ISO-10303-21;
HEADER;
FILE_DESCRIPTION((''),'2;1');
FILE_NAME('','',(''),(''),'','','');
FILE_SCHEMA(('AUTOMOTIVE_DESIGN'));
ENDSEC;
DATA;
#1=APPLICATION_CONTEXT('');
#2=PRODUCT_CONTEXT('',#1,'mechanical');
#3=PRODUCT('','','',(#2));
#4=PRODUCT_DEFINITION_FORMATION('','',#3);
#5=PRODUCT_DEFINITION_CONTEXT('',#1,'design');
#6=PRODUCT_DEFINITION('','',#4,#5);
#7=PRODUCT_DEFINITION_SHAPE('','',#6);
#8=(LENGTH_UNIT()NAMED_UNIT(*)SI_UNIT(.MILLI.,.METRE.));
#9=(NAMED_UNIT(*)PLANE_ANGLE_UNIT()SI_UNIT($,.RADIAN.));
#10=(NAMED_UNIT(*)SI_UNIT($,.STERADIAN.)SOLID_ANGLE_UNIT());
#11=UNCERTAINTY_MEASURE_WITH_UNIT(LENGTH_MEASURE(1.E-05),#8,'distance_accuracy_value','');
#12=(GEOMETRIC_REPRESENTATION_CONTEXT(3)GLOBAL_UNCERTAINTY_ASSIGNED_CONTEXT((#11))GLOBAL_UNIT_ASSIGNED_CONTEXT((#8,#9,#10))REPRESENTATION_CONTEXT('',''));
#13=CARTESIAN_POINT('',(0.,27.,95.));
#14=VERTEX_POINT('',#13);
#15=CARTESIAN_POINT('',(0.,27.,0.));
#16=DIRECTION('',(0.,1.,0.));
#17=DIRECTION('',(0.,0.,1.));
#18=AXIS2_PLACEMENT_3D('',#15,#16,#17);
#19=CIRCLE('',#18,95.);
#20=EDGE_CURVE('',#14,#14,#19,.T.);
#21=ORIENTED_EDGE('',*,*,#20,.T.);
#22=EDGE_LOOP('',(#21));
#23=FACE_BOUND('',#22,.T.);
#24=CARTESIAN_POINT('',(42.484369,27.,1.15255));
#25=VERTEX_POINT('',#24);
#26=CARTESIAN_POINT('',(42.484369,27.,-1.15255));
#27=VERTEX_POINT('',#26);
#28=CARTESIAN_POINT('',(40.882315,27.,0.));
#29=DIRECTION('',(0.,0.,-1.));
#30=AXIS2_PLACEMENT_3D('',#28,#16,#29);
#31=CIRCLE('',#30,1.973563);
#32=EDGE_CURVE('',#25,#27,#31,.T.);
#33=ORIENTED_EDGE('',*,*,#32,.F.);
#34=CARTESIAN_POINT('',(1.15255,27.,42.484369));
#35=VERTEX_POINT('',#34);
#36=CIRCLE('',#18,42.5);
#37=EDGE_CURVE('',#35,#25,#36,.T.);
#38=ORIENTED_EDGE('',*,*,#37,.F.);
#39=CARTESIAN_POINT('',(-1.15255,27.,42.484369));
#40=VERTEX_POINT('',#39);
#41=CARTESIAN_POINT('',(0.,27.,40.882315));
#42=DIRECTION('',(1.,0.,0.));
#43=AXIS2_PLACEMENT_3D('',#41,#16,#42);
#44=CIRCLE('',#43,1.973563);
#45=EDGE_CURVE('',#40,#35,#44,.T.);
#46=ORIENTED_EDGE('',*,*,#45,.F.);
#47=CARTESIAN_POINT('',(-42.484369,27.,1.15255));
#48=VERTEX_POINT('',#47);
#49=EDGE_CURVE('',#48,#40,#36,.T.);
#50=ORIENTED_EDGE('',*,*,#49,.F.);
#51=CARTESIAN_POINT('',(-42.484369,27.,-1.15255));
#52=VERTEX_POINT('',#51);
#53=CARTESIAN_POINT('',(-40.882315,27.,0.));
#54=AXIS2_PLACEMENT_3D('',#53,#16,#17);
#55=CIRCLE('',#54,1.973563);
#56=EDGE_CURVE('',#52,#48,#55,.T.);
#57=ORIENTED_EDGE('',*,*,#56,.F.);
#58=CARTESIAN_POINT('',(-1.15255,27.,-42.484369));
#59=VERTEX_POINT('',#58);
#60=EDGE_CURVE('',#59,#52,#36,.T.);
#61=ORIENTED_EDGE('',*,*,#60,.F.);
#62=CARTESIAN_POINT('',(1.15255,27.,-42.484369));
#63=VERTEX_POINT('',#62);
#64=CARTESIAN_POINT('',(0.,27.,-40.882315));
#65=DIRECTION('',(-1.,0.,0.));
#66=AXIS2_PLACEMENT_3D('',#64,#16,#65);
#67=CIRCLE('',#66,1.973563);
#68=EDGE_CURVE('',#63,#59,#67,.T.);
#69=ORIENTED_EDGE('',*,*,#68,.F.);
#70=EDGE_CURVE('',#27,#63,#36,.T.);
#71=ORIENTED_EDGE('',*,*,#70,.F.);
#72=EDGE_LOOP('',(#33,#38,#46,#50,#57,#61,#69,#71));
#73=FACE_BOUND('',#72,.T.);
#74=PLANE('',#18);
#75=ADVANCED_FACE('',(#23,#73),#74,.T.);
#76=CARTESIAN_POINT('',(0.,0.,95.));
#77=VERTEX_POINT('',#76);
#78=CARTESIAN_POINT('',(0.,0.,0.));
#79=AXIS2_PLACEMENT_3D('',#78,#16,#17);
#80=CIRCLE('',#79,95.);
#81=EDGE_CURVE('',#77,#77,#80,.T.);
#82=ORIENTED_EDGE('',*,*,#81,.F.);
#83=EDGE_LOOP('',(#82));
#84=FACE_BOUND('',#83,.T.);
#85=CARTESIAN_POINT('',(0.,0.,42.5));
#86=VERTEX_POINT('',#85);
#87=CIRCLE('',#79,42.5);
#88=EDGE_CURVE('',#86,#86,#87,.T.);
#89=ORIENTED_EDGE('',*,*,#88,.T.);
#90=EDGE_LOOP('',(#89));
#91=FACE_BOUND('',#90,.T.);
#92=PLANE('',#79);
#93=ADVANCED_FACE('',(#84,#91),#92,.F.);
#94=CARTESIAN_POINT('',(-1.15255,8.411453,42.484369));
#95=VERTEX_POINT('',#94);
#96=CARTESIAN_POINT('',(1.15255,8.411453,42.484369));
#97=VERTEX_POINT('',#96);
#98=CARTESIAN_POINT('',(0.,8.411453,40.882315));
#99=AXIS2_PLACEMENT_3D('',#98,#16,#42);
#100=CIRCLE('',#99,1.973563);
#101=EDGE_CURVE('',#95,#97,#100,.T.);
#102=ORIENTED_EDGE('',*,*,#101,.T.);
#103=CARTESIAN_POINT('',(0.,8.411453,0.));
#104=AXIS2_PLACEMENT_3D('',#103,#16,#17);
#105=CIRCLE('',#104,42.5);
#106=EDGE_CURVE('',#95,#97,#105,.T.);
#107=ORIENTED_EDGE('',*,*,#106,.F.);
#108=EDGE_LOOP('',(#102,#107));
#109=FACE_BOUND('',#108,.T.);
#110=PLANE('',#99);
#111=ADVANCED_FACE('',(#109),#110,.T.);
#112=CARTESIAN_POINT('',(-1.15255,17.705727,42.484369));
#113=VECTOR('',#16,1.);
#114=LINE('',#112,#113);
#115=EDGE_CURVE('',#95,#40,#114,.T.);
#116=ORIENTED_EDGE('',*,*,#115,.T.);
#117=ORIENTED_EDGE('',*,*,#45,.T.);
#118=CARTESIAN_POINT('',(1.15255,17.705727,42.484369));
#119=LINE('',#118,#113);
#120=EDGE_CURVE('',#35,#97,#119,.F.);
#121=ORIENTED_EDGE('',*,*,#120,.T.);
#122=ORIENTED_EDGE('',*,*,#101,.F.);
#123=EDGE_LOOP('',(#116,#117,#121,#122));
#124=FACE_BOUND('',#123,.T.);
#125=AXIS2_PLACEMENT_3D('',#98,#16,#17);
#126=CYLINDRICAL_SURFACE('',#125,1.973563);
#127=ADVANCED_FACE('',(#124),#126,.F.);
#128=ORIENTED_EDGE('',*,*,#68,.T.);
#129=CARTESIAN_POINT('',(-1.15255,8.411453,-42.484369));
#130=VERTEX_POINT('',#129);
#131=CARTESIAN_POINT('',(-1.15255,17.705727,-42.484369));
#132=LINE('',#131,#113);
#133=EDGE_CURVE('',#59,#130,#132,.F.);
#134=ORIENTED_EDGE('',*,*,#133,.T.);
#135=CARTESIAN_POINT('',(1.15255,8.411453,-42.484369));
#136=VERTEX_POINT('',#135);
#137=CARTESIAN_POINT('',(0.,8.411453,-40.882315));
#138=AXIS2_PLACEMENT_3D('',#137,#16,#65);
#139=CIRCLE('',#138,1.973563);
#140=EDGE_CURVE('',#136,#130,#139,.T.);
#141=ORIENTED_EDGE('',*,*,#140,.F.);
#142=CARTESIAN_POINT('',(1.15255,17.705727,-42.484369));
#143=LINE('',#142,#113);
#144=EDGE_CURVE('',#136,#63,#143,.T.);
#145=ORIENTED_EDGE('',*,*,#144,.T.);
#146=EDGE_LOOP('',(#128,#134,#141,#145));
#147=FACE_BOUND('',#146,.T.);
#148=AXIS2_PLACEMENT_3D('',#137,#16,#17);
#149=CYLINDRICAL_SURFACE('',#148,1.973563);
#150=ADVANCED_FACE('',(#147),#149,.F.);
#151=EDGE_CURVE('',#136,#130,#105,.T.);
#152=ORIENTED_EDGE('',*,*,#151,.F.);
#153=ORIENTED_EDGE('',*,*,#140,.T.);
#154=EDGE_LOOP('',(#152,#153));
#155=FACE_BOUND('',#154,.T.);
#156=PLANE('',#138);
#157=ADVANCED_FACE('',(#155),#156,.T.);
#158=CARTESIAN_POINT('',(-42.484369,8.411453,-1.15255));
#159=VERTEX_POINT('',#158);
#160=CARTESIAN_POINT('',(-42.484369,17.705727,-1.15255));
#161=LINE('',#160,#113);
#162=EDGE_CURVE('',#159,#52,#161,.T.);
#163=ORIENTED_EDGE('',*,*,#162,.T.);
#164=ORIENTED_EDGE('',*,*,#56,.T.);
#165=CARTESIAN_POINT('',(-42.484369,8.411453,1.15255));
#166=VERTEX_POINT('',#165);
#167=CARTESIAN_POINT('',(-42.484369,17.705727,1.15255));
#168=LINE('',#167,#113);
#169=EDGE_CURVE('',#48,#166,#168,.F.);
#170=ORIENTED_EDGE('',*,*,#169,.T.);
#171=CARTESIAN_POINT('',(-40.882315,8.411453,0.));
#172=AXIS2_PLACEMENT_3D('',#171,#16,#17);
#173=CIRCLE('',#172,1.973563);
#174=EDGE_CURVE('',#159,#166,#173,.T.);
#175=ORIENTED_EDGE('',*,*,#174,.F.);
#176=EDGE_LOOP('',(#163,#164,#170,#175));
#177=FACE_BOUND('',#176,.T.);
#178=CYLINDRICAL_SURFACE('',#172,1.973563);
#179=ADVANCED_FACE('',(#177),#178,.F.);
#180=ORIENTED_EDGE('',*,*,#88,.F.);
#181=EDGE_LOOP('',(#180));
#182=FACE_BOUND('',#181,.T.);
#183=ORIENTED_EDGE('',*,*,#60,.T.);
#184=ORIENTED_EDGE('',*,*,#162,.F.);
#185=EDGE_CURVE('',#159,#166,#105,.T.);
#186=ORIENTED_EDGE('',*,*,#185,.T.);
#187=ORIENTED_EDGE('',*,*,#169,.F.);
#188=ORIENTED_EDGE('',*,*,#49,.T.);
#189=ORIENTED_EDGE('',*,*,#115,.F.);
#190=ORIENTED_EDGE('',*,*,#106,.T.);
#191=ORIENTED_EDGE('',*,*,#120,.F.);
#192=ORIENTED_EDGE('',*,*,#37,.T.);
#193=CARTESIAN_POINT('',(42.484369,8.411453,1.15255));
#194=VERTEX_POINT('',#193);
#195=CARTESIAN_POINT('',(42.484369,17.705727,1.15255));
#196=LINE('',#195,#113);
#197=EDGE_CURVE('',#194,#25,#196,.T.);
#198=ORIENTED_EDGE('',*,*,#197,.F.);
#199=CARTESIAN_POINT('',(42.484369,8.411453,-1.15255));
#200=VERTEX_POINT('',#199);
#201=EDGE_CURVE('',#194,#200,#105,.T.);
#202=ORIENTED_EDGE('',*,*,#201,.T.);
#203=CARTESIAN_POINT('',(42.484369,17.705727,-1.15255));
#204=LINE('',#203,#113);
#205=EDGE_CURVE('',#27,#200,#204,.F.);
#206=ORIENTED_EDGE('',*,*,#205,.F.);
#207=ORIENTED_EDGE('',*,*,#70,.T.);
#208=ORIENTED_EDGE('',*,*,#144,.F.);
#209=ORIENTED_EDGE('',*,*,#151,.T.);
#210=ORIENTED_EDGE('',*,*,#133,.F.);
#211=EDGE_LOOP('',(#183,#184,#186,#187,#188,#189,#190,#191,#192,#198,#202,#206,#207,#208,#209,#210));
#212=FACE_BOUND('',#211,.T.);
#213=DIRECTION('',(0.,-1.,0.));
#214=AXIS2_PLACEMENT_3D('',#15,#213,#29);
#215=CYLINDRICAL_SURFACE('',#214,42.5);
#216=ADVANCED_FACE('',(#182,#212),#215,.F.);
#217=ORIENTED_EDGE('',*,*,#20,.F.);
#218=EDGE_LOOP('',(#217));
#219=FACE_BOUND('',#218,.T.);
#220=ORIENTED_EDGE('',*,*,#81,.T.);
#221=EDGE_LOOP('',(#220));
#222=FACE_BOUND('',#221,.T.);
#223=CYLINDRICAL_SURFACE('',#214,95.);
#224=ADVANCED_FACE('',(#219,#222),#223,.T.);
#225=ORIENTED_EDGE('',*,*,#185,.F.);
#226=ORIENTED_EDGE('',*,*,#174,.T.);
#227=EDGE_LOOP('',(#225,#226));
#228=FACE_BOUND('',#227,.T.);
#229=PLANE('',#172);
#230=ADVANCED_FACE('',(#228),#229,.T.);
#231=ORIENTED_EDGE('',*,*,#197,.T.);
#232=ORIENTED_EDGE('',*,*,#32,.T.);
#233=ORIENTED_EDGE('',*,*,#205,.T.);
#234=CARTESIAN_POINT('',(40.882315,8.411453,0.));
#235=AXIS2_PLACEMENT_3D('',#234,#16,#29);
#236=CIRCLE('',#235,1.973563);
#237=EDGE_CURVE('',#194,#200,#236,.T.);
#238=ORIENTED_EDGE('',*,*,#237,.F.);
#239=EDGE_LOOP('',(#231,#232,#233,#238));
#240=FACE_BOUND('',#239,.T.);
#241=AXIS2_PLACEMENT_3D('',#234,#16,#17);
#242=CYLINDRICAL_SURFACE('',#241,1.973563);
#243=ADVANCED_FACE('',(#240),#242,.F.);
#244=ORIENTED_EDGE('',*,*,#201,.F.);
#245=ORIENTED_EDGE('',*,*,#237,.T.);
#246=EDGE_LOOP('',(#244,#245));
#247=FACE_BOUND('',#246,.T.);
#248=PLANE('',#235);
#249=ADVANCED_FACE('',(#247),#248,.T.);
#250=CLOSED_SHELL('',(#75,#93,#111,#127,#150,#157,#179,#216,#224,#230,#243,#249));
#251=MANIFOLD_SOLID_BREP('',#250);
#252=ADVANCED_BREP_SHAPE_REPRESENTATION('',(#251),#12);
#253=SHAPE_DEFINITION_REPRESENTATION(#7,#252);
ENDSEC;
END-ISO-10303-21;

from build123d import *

# Parameters (mm, degrees)
SKETCH1_R           = 95
BOSS_EXTRUDE1_DEPTH = 27
SKETCH2_R           = 42.5
CUT_EXTRUDE1_DEPTH  = 138.03649149
SKETCH3_R           = 1.973562568
CUT_EXTRUDE2_DEPTH  = 18.5885467
CIRPATTERN1_COUNT   = 4


with BuildPart() as part:
    # Sketch1 → Boss-Extrude1 (new body)
    with BuildSketch(Plane(origin=(0, 0, 0), x_dir=(1, 0, 0), z_dir=(0, 1, 0))):
        Circle(SKETCH1_R)
    extrude(amount=BOSS_EXTRUDE1_DEPTH)

    # Sketch2 → Cut-Extrude1 (cut, through all)
    with BuildSketch(Plane(origin=(0, 0, 0), x_dir=(1, 0, 0), z_dir=(0, 1, 0))):
        Circle(SKETCH2_R)
    extrude(amount=CUT_EXTRUDE1_DEPTH, mode=Mode.SUBTRACT)

    # Sketch3 → Cut-Extrude2 (cut)
    with BuildSketch(Plane(origin=(0, 27, 0), x_dir=(1, 0, 0), z_dir=(0, 1, 0))):
        with Locations((-40.882315231, 0)):
            Circle(SKETCH3_R)
    cut_extrude2 = extrude(amount=-CUT_EXTRUDE2_DEPTH, mode=Mode.SUBTRACT)

    # CirPattern1: Cut-Extrude2 ×4 about axis
    cirpattern1_axis = Axis((0, 0, 0), (0, 1, 0))
    for i in range(1, CIRPATTERN1_COUNT):
        add(cut_extrude2.rotate(cirpattern1_axis, i * 360 / CIRPATTERN1_COUNT), mode=Mode.SUBTRACT)


solid = part.part
